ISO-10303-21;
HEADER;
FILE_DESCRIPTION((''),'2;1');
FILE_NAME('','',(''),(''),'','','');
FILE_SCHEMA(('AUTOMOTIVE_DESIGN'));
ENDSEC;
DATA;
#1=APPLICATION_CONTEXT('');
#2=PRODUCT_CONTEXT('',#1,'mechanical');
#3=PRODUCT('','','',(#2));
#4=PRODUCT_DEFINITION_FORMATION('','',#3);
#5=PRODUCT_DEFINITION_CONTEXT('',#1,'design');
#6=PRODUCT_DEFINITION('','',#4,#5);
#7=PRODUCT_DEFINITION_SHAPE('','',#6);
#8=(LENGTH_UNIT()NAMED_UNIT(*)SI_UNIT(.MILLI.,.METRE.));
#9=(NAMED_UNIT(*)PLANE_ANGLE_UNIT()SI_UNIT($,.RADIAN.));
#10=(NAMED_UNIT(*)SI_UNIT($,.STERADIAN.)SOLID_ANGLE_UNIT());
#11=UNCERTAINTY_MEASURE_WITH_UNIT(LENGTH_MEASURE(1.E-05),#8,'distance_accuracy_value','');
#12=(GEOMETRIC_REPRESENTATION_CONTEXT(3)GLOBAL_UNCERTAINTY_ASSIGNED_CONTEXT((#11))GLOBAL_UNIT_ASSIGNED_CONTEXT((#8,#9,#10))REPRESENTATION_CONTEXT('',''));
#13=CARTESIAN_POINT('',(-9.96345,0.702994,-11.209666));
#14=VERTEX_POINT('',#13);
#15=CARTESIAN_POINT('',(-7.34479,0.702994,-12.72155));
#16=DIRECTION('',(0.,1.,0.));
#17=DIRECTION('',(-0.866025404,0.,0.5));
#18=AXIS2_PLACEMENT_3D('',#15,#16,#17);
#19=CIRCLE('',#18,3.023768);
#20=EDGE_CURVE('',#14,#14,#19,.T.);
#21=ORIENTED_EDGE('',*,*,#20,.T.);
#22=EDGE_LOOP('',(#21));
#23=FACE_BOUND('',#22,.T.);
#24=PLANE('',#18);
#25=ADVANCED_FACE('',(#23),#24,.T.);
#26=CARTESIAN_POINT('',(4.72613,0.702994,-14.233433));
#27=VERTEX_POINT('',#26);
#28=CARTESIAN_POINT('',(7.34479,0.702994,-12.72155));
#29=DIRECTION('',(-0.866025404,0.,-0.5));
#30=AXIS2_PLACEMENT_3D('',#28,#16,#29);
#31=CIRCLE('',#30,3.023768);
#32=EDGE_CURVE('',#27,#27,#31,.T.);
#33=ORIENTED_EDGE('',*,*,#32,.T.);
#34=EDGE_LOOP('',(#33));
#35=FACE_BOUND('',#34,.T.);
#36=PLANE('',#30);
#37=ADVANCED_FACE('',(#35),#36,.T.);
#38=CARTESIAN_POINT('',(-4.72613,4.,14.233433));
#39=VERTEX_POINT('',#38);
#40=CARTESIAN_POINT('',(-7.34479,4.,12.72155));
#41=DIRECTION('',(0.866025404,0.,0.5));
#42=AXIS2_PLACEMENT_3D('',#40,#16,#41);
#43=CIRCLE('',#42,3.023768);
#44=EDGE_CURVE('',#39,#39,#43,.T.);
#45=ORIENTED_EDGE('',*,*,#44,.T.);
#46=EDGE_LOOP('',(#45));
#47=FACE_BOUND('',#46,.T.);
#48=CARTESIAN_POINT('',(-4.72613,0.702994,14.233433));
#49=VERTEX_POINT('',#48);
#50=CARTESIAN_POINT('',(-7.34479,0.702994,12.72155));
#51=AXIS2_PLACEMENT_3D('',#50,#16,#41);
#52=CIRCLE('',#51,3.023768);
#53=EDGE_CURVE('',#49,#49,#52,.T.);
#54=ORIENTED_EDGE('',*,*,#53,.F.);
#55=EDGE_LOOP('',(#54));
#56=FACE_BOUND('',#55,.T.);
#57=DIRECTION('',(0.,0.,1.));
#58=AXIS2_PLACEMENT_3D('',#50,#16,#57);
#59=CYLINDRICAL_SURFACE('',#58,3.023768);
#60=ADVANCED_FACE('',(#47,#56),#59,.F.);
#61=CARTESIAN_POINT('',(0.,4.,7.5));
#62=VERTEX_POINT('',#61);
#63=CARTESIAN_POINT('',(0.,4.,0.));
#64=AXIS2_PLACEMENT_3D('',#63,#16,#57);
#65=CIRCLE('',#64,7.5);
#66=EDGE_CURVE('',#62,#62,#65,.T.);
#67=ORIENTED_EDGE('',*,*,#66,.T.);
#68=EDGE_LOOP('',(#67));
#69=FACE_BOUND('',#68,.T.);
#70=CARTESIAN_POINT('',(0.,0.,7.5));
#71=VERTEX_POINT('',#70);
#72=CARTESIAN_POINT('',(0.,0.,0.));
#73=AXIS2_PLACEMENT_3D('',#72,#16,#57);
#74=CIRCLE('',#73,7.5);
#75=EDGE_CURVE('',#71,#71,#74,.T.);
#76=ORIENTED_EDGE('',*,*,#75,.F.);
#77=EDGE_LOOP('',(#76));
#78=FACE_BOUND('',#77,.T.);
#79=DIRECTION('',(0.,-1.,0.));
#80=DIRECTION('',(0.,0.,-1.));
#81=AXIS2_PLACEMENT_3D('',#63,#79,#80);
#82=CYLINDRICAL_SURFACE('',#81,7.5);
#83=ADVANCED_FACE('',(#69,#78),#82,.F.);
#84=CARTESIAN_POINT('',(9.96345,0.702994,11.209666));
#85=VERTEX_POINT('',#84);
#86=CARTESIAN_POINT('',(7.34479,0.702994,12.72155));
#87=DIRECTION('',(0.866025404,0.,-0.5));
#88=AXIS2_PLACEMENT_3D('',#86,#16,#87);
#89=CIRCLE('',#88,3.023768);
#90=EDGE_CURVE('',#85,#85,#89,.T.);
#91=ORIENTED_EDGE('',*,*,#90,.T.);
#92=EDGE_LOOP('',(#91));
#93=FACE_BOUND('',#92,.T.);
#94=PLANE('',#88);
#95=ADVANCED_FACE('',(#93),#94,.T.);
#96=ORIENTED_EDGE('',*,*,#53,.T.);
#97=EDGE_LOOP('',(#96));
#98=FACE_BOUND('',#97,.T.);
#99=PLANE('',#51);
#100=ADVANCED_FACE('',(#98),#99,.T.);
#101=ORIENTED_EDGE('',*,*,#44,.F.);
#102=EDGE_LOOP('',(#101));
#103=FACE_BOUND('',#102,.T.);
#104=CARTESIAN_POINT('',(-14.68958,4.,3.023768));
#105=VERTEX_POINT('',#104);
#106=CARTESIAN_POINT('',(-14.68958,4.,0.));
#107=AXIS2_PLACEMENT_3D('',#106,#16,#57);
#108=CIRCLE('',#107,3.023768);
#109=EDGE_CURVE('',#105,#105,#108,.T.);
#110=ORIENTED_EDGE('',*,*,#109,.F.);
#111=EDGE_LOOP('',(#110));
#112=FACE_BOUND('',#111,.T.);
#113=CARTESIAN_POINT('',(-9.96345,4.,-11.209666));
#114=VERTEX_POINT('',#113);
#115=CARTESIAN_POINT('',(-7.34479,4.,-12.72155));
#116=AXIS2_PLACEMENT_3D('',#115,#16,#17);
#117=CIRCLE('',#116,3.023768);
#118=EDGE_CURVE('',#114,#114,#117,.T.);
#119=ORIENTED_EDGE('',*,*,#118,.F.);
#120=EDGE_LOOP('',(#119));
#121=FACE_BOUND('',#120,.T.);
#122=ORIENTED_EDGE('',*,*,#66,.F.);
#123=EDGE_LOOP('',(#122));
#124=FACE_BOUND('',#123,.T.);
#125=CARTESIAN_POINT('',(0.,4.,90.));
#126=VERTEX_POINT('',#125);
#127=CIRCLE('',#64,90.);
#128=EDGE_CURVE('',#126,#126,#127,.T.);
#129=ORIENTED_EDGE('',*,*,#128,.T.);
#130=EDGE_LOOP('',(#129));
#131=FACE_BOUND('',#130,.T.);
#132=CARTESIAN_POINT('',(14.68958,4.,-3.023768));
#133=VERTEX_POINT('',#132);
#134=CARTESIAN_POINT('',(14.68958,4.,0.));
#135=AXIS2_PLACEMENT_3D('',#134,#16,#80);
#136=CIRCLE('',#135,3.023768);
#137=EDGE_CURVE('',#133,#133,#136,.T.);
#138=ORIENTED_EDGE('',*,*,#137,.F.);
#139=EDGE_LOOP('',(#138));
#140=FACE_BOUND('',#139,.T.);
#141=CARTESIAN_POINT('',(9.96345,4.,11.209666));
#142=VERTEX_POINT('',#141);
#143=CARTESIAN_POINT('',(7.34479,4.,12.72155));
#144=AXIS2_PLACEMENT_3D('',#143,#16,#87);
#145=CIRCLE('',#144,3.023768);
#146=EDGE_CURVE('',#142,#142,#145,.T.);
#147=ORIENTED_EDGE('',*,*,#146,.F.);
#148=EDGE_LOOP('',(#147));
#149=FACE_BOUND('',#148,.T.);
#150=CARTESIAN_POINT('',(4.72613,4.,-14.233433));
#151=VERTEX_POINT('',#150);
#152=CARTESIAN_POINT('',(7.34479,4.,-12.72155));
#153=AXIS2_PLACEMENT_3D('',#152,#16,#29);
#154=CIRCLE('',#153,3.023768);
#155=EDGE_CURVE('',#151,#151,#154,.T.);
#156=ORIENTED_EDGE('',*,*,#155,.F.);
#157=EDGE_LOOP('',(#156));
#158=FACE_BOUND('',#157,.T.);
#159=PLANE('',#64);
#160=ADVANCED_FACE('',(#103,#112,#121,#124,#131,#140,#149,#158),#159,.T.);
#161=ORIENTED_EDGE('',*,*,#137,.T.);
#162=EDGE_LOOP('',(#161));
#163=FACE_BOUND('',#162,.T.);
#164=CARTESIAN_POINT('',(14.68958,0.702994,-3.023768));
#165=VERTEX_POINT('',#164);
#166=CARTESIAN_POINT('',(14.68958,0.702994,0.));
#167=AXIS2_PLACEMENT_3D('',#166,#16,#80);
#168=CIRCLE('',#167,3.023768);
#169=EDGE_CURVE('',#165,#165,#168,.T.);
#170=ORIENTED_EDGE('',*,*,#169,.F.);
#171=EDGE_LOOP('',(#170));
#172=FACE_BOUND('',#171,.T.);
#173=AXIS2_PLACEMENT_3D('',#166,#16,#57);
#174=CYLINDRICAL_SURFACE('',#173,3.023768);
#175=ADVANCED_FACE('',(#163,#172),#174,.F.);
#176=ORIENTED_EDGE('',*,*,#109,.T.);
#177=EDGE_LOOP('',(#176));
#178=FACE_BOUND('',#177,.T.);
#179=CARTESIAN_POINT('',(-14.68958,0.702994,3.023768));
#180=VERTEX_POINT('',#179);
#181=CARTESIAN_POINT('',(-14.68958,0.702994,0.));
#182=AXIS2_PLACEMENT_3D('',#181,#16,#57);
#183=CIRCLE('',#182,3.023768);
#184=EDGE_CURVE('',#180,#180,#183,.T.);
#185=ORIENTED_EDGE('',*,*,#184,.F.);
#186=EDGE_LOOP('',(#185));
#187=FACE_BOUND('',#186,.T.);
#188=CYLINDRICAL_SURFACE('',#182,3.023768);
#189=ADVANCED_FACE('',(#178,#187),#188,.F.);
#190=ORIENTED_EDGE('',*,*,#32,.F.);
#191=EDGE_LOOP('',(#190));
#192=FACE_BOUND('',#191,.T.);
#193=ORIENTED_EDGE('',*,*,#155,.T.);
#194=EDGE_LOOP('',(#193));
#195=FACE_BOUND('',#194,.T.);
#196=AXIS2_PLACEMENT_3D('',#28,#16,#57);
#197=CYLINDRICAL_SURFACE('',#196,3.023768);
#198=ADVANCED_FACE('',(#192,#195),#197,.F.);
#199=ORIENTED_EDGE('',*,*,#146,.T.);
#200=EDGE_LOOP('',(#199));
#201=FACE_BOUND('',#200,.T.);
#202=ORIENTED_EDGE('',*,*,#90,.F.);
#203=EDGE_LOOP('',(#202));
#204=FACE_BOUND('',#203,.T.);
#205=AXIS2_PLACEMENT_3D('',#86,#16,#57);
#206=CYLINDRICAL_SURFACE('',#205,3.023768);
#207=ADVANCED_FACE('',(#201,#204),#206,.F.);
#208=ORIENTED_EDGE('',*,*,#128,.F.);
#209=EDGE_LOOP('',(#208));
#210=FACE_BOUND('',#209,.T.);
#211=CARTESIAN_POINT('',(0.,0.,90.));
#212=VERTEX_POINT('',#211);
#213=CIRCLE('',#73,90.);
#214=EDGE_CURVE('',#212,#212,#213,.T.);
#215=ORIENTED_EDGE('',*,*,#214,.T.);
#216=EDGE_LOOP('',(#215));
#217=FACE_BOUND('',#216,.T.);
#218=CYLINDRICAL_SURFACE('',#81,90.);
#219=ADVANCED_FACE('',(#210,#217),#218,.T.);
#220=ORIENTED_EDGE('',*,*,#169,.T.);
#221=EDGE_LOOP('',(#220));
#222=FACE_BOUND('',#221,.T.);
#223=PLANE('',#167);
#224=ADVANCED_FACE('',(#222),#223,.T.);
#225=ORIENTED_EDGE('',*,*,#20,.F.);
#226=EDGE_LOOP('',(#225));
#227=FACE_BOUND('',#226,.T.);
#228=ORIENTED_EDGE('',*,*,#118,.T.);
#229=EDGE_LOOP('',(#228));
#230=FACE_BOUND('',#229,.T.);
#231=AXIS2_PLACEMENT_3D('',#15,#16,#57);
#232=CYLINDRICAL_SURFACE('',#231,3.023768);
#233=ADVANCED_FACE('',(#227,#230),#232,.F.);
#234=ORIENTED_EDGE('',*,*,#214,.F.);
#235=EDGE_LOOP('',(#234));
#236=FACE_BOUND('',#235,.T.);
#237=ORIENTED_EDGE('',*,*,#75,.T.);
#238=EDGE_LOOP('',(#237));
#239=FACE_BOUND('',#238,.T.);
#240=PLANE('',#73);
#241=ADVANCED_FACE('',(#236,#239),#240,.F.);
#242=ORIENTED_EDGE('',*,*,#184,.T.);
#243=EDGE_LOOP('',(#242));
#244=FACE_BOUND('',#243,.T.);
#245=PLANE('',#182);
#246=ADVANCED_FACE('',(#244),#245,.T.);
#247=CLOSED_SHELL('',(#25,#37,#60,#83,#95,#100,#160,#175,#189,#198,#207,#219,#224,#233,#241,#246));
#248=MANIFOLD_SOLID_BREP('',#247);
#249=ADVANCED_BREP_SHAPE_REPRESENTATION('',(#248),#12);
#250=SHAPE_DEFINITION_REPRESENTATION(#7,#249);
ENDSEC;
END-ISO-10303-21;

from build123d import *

# Parameters (mm, degrees)
SKETCH1_R           = 90
BOSS_EXTRUDE1_DEPTH = 4
SKETCH2_R           = 7.5
CUT_EXTRUDE1_DEPTH  = 128.342059038
SKETCH3_R           = 3.023767703
CUT_EXTRUDE2_DEPTH  = 3.297005777
CIRPATTERN1_COUNT   = 6


with BuildPart() as part:
    # Sketch1 → Boss-Extrude1 (new body)
    with BuildSketch(Plane(origin=(0, 0, 0), x_dir=(1, 0, 0), z_dir=(0, 1, 0))):
        Circle(SKETCH1_R)
    extrude(amount=BOSS_EXTRUDE1_DEPTH)

    # Sketch2 → Cut-Extrude1 (cut, through all)
    with BuildSketch(Plane(origin=(0, 0, 0), x_dir=(1, 0, 0), z_dir=(0, 1, 0))):
        Circle(SKETCH2_R)
    extrude(amount=CUT_EXTRUDE1_DEPTH, mode=Mode.SUBTRACT)

    # Sketch3 → Cut-Extrude2 (cut)
    with BuildSketch(Plane(origin=(0, 4, 0), x_dir=(1, 0, 0), z_dir=(0, 1, 0))):
        with Locations((-14.689580211, 0)):
            Circle(SKETCH3_R)
    cut_extrude2 = extrude(amount=-CUT_EXTRUDE2_DEPTH, mode=Mode.SUBTRACT)

    # CirPattern1: Cut-Extrude2 ×6 about axis
    cirpattern1_axis = Axis((0, 0, 0), (0, 1, 0))
    for i in range(1, CIRPATTERN1_COUNT):
        add(cut_extrude2.rotate(cirpattern1_axis, i * 360 / CIRPATTERN1_COUNT), mode=Mode.SUBTRACT)


solid = part.part
